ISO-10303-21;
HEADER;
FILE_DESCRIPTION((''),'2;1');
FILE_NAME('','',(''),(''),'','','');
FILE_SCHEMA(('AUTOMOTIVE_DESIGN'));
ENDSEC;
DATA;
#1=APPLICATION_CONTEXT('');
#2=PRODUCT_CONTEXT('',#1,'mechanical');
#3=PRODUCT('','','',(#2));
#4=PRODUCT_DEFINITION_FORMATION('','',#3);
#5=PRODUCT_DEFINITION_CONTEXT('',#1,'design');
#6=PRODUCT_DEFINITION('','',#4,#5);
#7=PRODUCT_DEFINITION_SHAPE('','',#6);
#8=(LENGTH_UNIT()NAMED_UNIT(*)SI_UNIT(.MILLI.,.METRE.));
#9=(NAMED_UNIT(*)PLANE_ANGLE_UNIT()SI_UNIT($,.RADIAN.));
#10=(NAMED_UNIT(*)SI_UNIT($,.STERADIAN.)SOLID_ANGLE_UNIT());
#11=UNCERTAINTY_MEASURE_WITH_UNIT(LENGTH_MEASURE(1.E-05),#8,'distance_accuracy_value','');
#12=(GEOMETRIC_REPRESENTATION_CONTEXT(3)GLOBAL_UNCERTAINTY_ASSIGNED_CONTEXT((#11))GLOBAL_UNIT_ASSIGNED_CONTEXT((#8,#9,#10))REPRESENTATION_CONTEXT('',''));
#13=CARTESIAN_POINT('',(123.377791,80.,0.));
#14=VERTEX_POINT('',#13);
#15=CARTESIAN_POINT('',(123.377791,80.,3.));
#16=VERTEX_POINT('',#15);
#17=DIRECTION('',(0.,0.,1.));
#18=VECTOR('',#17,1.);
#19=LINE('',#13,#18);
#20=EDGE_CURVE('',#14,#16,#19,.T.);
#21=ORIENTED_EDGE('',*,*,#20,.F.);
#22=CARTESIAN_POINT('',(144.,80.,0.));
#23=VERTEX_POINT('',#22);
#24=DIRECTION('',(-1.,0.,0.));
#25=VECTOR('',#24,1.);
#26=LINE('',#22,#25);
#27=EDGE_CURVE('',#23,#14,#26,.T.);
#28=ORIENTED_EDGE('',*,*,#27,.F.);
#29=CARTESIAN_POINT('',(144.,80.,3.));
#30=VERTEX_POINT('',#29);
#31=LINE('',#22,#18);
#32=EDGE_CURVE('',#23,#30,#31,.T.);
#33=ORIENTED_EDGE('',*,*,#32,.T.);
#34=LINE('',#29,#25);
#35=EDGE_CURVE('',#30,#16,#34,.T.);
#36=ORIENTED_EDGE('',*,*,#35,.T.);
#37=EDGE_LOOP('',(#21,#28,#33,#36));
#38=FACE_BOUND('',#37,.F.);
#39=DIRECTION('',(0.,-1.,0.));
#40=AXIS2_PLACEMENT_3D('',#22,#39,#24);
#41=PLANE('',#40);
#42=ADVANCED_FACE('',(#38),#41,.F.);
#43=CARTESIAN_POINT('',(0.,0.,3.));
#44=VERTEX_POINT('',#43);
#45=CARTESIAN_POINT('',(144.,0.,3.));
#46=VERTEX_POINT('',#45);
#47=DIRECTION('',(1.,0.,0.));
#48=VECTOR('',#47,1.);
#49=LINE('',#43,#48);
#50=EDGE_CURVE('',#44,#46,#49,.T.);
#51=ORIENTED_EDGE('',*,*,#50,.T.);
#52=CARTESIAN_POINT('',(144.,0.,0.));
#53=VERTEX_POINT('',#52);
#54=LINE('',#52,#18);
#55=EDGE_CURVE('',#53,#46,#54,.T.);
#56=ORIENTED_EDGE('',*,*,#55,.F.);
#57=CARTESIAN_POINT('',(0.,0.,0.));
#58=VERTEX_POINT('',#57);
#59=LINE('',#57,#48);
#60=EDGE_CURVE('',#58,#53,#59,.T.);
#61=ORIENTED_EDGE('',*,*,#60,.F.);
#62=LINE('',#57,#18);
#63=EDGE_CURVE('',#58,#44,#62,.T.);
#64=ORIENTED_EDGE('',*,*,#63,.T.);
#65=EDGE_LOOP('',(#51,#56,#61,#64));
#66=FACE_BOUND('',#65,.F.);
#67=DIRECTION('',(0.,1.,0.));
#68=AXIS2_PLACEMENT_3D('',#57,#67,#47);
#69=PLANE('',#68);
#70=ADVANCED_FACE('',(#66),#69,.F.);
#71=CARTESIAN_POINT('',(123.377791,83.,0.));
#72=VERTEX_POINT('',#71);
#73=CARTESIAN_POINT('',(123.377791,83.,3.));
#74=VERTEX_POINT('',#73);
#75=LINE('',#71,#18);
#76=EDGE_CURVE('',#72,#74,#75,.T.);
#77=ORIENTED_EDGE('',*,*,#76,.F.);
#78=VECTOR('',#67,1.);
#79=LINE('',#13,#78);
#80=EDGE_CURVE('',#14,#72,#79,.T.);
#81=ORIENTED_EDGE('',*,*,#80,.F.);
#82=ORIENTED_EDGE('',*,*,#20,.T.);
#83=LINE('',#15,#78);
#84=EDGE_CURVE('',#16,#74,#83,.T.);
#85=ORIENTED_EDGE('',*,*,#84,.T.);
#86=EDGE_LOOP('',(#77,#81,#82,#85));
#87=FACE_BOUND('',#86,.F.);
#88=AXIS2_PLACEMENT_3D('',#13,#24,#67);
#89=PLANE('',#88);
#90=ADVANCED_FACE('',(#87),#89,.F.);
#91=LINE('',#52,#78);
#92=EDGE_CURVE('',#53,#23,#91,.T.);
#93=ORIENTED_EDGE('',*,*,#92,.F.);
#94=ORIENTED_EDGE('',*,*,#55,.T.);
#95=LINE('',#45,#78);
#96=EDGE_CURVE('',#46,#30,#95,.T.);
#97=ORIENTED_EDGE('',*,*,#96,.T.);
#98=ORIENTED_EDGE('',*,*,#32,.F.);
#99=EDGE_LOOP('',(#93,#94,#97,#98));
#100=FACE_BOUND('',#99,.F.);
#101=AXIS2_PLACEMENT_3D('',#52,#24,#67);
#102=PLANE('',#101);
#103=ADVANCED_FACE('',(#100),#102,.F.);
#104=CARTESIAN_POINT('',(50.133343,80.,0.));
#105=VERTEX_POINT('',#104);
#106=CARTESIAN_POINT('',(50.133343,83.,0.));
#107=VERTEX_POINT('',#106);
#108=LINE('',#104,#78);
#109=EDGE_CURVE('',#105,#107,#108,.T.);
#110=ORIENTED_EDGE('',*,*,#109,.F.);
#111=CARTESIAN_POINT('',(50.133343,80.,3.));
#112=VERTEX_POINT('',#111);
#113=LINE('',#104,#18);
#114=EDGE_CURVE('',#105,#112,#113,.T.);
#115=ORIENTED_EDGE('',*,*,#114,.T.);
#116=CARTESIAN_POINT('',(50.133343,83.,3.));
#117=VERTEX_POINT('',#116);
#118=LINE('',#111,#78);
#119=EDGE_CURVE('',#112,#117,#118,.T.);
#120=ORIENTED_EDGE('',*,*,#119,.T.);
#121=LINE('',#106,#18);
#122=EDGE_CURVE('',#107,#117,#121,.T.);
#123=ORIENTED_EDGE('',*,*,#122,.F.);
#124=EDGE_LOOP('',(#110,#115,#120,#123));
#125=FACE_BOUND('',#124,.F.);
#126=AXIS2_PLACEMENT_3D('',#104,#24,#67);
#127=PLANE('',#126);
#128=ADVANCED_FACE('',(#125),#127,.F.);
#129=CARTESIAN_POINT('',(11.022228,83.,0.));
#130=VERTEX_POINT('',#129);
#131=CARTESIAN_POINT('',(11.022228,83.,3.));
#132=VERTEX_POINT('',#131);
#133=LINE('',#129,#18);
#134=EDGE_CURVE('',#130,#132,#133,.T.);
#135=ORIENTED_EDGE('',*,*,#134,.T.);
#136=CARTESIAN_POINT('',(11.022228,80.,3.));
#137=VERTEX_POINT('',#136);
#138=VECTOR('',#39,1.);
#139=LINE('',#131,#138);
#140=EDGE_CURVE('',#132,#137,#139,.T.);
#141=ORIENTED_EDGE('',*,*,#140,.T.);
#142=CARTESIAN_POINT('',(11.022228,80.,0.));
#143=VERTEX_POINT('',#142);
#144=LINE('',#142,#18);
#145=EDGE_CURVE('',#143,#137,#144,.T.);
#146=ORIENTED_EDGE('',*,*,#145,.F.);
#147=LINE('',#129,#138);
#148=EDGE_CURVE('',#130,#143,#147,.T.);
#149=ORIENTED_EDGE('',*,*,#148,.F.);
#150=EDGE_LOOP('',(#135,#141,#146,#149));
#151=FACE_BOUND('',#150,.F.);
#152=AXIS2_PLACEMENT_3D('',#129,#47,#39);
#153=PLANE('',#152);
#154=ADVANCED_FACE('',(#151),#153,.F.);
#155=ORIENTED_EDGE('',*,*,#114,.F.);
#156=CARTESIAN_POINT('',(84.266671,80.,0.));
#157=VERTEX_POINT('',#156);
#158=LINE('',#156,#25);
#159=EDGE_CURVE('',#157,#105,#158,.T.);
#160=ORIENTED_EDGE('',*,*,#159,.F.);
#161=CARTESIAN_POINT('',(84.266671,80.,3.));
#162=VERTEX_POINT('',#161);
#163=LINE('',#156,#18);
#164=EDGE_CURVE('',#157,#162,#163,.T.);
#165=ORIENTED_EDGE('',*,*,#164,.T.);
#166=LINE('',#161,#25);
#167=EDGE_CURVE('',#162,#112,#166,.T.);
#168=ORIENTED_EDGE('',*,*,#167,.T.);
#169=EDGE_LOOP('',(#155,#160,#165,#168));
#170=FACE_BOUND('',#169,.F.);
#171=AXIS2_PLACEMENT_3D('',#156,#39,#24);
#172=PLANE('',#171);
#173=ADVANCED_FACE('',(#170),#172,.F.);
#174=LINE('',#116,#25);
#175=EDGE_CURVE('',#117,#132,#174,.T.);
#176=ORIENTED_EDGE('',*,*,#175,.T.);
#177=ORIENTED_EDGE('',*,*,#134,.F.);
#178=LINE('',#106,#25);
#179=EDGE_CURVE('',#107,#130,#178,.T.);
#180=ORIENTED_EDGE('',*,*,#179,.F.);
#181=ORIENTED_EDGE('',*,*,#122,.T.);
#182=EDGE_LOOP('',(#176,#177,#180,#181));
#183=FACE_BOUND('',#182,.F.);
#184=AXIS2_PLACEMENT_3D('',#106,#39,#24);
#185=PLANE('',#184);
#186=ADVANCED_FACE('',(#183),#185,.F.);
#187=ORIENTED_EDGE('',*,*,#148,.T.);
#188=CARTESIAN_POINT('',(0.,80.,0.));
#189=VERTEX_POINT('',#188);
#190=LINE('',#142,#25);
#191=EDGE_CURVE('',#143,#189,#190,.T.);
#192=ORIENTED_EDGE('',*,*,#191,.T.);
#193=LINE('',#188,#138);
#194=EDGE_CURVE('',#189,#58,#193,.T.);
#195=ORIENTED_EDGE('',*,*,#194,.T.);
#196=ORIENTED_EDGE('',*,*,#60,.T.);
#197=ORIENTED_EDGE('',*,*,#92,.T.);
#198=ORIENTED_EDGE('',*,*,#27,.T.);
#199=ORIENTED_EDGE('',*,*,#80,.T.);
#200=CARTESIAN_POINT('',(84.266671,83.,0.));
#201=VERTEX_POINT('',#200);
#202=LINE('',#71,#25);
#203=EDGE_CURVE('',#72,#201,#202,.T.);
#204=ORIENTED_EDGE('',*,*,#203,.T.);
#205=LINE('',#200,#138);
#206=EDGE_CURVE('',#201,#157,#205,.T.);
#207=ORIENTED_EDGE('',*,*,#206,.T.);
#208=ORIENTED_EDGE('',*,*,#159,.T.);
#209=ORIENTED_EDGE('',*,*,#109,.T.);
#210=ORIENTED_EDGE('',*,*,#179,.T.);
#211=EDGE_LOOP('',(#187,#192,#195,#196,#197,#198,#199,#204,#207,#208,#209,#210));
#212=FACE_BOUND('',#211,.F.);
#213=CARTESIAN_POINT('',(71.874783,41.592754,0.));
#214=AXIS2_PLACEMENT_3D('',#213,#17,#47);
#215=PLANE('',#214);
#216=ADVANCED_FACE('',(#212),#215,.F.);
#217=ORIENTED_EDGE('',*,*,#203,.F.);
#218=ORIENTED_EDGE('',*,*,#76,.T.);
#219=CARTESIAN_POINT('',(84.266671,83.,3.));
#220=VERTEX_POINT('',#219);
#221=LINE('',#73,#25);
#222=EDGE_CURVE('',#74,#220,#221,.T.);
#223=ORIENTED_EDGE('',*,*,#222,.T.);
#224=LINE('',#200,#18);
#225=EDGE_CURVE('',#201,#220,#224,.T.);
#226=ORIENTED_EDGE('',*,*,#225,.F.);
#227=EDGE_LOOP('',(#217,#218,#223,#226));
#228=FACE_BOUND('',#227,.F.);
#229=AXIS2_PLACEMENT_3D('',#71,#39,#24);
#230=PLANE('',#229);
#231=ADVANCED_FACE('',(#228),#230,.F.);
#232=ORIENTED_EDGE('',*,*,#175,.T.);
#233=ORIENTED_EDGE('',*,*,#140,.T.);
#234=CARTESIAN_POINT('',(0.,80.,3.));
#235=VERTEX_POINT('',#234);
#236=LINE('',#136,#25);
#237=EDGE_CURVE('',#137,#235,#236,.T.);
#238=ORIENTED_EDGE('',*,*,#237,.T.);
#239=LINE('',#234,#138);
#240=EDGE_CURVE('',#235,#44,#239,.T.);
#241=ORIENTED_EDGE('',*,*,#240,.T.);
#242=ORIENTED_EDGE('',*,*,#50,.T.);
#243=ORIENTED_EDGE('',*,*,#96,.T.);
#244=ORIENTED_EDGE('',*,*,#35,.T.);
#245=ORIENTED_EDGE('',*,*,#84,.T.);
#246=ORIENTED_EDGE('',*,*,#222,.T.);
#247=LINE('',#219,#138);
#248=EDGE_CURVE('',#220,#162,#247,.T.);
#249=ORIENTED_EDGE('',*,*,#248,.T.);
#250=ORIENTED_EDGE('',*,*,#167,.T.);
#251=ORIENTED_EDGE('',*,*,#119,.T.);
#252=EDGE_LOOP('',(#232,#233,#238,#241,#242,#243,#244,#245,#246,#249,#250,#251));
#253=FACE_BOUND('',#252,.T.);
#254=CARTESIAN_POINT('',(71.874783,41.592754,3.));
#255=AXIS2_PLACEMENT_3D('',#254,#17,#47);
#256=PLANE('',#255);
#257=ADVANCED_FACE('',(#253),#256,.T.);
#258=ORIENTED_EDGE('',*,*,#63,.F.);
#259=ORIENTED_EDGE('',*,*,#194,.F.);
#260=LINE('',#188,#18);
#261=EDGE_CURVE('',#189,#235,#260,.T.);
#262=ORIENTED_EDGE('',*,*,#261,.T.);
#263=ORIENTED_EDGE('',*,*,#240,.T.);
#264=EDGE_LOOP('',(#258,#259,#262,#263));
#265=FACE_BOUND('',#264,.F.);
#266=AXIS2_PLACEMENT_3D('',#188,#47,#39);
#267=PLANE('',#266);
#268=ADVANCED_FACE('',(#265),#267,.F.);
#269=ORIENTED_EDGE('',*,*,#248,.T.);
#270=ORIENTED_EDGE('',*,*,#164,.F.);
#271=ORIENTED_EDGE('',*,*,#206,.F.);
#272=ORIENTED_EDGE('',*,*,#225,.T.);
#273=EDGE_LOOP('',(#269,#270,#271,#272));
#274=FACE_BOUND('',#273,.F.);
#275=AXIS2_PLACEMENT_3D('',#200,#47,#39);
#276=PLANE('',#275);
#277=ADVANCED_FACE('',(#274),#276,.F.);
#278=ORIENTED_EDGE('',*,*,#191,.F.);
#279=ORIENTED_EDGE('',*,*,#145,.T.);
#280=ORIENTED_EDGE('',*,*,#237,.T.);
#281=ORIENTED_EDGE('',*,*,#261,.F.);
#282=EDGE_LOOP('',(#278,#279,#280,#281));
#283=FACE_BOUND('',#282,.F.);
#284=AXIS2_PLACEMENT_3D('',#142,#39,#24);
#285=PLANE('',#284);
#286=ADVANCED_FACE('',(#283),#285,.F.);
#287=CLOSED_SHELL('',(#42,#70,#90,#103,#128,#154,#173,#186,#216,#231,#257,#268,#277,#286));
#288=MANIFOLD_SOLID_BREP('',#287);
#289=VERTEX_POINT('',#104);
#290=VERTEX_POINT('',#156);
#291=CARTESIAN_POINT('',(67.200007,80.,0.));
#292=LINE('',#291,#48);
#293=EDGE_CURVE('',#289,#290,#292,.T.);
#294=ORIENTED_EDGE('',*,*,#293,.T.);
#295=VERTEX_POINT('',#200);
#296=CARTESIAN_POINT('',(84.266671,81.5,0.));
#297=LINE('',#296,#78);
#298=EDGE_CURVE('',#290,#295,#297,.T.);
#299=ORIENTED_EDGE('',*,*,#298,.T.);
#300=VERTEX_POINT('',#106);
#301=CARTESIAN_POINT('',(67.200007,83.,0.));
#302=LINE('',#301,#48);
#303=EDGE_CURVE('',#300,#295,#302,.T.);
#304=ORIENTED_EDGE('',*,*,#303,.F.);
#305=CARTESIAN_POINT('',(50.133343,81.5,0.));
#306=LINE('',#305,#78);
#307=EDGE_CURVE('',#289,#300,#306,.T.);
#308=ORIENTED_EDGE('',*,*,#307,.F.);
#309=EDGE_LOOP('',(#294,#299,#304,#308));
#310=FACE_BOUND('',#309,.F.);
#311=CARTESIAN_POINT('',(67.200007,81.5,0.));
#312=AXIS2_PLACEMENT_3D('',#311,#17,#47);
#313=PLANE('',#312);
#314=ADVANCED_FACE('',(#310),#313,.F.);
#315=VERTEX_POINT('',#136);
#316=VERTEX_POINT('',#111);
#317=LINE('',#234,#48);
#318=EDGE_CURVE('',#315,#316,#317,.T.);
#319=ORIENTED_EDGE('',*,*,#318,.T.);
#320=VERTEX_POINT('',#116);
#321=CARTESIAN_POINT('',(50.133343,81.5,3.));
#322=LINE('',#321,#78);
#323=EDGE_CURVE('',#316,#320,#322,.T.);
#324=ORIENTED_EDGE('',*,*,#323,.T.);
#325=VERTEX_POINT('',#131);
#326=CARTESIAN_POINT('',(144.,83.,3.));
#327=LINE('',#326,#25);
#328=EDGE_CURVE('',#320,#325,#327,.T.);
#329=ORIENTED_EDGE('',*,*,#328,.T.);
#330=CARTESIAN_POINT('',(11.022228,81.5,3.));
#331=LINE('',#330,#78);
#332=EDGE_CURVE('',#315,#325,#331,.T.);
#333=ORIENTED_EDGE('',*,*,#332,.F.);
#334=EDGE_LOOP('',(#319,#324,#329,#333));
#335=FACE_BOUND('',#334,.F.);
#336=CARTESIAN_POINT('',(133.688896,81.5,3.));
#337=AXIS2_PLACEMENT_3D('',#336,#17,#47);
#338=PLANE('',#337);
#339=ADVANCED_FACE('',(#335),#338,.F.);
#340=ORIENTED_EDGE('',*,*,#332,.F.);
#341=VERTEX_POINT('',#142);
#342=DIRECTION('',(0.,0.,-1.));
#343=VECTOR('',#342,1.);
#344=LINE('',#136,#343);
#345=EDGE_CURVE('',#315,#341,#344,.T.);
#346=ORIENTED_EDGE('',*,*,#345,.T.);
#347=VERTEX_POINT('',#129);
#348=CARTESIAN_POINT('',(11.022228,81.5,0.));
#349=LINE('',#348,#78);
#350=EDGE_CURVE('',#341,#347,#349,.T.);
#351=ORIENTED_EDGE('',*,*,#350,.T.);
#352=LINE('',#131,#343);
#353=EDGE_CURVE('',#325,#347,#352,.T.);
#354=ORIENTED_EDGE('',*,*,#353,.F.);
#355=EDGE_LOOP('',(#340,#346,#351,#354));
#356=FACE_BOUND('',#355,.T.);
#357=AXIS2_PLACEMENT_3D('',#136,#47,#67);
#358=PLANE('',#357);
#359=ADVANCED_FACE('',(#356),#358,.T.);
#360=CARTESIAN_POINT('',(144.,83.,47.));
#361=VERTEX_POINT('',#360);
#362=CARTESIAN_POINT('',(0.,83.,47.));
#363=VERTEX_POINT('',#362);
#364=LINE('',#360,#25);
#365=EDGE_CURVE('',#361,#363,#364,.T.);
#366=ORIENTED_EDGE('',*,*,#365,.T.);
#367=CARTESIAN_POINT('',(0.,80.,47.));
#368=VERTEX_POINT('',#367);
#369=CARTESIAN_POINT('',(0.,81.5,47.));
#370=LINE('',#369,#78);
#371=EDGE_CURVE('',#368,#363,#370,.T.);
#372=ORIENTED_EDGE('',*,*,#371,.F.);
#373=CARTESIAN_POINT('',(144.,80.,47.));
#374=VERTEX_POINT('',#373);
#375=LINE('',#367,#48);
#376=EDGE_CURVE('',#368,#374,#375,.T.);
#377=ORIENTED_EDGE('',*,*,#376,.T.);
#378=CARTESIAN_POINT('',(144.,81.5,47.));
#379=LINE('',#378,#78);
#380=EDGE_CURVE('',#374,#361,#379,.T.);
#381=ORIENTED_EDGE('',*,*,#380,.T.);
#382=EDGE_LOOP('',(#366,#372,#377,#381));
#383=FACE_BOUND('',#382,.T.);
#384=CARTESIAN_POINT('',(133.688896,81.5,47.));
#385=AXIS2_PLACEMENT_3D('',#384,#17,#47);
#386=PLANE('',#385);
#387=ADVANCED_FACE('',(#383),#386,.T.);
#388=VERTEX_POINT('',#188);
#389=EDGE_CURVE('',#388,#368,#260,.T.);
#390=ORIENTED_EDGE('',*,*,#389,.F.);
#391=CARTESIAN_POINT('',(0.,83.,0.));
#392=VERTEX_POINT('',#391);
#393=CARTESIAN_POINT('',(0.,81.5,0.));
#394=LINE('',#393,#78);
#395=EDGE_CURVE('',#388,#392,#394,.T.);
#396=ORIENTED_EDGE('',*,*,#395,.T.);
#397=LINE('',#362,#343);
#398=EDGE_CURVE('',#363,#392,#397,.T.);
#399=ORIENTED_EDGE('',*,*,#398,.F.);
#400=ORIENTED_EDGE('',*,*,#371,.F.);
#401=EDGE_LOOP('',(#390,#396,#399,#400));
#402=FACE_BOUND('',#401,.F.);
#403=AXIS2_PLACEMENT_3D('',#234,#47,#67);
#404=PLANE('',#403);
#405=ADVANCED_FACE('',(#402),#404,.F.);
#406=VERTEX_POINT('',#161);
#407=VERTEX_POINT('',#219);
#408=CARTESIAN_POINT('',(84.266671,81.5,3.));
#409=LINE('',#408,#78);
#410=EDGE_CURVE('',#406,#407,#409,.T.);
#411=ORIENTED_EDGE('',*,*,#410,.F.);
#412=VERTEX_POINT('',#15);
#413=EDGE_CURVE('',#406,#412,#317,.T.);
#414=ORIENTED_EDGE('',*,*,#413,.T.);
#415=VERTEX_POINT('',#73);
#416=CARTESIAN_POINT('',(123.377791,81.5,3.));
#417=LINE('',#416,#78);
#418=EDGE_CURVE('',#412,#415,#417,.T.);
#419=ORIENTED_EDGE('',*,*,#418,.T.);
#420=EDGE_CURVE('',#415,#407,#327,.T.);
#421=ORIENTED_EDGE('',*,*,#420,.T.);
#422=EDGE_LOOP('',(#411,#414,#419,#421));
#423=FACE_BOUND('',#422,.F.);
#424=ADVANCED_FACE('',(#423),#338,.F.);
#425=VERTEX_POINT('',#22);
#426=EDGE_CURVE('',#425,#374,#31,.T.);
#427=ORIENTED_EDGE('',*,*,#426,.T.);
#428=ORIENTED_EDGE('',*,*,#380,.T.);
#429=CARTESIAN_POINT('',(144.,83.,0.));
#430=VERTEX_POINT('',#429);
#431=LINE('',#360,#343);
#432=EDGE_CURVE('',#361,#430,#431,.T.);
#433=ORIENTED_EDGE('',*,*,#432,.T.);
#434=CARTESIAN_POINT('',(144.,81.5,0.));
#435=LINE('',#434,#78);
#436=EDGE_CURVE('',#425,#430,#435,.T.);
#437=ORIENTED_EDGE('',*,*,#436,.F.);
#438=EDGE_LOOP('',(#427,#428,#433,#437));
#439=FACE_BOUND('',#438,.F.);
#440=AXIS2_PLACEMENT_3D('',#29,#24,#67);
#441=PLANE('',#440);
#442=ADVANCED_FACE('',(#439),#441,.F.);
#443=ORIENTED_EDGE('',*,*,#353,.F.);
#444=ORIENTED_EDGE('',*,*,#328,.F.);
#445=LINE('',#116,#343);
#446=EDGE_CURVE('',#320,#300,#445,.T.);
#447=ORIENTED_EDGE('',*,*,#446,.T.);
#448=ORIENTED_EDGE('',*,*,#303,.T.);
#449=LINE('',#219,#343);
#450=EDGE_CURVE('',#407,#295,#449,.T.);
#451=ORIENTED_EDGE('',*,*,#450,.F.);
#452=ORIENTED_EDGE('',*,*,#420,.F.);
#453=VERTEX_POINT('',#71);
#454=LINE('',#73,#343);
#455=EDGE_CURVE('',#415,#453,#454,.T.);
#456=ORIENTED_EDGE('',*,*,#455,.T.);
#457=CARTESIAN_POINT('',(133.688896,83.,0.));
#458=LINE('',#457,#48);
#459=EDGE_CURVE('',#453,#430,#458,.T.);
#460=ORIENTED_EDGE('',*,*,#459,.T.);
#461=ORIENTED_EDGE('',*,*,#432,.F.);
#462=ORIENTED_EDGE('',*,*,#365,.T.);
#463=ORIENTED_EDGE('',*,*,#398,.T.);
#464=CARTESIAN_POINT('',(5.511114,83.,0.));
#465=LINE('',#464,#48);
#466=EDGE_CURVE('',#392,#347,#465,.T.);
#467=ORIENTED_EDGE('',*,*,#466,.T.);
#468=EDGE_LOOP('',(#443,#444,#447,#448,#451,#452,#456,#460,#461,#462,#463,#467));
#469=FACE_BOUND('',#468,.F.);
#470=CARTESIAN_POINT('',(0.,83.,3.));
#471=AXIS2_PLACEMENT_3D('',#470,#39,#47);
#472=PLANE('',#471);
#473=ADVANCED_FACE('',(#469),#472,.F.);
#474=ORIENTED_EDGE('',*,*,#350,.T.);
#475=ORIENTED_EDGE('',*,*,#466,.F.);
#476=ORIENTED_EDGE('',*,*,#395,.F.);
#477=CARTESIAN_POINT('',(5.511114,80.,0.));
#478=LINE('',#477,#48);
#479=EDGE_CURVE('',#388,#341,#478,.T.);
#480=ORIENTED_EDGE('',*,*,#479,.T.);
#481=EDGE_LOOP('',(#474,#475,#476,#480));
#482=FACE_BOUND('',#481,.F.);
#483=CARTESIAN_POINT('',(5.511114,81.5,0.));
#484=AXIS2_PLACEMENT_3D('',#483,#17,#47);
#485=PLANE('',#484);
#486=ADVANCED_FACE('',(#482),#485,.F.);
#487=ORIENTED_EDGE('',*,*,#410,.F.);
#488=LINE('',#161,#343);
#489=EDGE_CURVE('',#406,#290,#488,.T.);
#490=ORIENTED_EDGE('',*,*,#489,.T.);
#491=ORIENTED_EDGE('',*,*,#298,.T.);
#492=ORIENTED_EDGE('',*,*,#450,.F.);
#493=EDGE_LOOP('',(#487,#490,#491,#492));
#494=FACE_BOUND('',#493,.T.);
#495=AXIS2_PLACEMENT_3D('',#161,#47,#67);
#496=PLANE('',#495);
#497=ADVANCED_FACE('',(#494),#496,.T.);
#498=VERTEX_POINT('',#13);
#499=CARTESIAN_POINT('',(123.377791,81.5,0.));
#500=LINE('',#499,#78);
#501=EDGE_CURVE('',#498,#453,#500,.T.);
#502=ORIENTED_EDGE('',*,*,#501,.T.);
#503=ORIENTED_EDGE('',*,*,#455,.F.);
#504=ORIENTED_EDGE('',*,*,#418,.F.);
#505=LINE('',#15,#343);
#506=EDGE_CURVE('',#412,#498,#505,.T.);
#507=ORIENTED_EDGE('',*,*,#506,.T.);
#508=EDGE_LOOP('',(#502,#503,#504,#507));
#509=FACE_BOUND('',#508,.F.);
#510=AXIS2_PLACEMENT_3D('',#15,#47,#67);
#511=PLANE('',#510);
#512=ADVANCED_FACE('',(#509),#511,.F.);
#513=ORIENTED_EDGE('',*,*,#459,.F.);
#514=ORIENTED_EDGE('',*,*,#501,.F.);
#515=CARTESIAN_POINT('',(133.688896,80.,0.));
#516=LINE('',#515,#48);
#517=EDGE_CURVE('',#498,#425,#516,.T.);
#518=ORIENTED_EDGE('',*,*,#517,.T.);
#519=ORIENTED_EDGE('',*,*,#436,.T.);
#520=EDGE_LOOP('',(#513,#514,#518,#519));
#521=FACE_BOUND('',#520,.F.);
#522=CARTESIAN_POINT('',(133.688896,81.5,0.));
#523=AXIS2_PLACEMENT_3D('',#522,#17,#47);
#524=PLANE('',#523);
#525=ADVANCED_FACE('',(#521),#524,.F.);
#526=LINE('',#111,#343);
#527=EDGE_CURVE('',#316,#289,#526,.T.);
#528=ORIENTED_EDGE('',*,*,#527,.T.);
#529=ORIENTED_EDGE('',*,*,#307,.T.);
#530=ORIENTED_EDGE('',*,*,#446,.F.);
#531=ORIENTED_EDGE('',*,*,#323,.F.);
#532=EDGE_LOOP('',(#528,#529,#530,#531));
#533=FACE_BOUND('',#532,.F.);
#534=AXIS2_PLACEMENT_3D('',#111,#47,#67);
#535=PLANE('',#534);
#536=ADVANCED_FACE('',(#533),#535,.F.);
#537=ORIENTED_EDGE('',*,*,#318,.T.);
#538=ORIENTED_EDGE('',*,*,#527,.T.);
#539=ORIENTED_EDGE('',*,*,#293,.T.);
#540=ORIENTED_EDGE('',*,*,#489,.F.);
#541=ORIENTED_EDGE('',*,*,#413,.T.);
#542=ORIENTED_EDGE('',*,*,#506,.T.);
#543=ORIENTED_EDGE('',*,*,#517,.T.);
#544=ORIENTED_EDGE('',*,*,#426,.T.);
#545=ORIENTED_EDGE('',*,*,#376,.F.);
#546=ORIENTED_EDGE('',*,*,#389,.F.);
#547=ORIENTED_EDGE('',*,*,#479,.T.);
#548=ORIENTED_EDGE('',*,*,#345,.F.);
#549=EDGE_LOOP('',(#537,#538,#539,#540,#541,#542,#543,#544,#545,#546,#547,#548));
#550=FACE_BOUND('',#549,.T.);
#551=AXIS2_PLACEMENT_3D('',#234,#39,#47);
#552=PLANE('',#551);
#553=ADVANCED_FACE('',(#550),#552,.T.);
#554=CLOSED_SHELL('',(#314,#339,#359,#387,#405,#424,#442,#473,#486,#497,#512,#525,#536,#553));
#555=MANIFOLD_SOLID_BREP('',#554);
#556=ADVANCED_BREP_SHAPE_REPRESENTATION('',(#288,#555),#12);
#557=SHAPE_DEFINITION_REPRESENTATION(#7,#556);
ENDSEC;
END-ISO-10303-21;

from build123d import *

# Parameters (mm, degrees)
F2_DEPTH = 3
F3_W     = 20.6222088363
F3_H     = 3
F3_W_2   = 39.1111204304
F3_W_3   = 39.1111154266
F3_W_4   = 11.022227565
F3_W_5   = 34.1333277417
F4_DEPTH = 44
F5_DEPTH = 3


with BuildPart() as f2:
    # F1 (on Top) → F2 (new body)
    with BuildSketch(Plane.XY):
        Polygon((0, 80), (0, 0), (144, 0), (144, 80), (123.3777911637, 80), (123.3777911637, 83), (84.2666707333, 83), (84.2666707333, 80), (50.1333429916, 80), (50.1333429916, 83), (11.022227565, 83), (11.022227565, 80), align=None)
    extrude(amount=F2_DEPTH)


with BuildPart() as f4:
    # F3 (on face) → F4 (new body)
    with BuildSketch(Plane.XY.offset(3)):
        with Locations((133.6888955819, 81.5)):
            Rectangle(F3_W, F3_H)
        with Locations((103.8222309485, 81.5)):
            Rectangle(F3_W_2, F3_H)
        with Locations((30.5777852783, 81.5)):
            Rectangle(F3_W_3, F3_H)
        with Locations((5.5111137825, 81.5)):
            Rectangle(F3_W_4, F3_H)
        with Locations((67.2000068624, 81.5)):
            Rectangle(F3_W_5, F3_H)
    extrude(amount=F4_DEPTH)

    # F3 (on face) → F5 (join)
    with BuildSketch(Plane.XY.offset(3)):
        with Locations((5.5111137825, 81.5)):
            Rectangle(F3_W_4, F3_H)
        with Locations((67.2000068624, 81.5)):
            Rectangle(F3_W_5, F3_H)
        with Locations((133.6888955819, 81.5)):
            Rectangle(F3_W, F3_H)
    extrude(amount=-F5_DEPTH)


solid = Compound([f2.part, f4.part])
